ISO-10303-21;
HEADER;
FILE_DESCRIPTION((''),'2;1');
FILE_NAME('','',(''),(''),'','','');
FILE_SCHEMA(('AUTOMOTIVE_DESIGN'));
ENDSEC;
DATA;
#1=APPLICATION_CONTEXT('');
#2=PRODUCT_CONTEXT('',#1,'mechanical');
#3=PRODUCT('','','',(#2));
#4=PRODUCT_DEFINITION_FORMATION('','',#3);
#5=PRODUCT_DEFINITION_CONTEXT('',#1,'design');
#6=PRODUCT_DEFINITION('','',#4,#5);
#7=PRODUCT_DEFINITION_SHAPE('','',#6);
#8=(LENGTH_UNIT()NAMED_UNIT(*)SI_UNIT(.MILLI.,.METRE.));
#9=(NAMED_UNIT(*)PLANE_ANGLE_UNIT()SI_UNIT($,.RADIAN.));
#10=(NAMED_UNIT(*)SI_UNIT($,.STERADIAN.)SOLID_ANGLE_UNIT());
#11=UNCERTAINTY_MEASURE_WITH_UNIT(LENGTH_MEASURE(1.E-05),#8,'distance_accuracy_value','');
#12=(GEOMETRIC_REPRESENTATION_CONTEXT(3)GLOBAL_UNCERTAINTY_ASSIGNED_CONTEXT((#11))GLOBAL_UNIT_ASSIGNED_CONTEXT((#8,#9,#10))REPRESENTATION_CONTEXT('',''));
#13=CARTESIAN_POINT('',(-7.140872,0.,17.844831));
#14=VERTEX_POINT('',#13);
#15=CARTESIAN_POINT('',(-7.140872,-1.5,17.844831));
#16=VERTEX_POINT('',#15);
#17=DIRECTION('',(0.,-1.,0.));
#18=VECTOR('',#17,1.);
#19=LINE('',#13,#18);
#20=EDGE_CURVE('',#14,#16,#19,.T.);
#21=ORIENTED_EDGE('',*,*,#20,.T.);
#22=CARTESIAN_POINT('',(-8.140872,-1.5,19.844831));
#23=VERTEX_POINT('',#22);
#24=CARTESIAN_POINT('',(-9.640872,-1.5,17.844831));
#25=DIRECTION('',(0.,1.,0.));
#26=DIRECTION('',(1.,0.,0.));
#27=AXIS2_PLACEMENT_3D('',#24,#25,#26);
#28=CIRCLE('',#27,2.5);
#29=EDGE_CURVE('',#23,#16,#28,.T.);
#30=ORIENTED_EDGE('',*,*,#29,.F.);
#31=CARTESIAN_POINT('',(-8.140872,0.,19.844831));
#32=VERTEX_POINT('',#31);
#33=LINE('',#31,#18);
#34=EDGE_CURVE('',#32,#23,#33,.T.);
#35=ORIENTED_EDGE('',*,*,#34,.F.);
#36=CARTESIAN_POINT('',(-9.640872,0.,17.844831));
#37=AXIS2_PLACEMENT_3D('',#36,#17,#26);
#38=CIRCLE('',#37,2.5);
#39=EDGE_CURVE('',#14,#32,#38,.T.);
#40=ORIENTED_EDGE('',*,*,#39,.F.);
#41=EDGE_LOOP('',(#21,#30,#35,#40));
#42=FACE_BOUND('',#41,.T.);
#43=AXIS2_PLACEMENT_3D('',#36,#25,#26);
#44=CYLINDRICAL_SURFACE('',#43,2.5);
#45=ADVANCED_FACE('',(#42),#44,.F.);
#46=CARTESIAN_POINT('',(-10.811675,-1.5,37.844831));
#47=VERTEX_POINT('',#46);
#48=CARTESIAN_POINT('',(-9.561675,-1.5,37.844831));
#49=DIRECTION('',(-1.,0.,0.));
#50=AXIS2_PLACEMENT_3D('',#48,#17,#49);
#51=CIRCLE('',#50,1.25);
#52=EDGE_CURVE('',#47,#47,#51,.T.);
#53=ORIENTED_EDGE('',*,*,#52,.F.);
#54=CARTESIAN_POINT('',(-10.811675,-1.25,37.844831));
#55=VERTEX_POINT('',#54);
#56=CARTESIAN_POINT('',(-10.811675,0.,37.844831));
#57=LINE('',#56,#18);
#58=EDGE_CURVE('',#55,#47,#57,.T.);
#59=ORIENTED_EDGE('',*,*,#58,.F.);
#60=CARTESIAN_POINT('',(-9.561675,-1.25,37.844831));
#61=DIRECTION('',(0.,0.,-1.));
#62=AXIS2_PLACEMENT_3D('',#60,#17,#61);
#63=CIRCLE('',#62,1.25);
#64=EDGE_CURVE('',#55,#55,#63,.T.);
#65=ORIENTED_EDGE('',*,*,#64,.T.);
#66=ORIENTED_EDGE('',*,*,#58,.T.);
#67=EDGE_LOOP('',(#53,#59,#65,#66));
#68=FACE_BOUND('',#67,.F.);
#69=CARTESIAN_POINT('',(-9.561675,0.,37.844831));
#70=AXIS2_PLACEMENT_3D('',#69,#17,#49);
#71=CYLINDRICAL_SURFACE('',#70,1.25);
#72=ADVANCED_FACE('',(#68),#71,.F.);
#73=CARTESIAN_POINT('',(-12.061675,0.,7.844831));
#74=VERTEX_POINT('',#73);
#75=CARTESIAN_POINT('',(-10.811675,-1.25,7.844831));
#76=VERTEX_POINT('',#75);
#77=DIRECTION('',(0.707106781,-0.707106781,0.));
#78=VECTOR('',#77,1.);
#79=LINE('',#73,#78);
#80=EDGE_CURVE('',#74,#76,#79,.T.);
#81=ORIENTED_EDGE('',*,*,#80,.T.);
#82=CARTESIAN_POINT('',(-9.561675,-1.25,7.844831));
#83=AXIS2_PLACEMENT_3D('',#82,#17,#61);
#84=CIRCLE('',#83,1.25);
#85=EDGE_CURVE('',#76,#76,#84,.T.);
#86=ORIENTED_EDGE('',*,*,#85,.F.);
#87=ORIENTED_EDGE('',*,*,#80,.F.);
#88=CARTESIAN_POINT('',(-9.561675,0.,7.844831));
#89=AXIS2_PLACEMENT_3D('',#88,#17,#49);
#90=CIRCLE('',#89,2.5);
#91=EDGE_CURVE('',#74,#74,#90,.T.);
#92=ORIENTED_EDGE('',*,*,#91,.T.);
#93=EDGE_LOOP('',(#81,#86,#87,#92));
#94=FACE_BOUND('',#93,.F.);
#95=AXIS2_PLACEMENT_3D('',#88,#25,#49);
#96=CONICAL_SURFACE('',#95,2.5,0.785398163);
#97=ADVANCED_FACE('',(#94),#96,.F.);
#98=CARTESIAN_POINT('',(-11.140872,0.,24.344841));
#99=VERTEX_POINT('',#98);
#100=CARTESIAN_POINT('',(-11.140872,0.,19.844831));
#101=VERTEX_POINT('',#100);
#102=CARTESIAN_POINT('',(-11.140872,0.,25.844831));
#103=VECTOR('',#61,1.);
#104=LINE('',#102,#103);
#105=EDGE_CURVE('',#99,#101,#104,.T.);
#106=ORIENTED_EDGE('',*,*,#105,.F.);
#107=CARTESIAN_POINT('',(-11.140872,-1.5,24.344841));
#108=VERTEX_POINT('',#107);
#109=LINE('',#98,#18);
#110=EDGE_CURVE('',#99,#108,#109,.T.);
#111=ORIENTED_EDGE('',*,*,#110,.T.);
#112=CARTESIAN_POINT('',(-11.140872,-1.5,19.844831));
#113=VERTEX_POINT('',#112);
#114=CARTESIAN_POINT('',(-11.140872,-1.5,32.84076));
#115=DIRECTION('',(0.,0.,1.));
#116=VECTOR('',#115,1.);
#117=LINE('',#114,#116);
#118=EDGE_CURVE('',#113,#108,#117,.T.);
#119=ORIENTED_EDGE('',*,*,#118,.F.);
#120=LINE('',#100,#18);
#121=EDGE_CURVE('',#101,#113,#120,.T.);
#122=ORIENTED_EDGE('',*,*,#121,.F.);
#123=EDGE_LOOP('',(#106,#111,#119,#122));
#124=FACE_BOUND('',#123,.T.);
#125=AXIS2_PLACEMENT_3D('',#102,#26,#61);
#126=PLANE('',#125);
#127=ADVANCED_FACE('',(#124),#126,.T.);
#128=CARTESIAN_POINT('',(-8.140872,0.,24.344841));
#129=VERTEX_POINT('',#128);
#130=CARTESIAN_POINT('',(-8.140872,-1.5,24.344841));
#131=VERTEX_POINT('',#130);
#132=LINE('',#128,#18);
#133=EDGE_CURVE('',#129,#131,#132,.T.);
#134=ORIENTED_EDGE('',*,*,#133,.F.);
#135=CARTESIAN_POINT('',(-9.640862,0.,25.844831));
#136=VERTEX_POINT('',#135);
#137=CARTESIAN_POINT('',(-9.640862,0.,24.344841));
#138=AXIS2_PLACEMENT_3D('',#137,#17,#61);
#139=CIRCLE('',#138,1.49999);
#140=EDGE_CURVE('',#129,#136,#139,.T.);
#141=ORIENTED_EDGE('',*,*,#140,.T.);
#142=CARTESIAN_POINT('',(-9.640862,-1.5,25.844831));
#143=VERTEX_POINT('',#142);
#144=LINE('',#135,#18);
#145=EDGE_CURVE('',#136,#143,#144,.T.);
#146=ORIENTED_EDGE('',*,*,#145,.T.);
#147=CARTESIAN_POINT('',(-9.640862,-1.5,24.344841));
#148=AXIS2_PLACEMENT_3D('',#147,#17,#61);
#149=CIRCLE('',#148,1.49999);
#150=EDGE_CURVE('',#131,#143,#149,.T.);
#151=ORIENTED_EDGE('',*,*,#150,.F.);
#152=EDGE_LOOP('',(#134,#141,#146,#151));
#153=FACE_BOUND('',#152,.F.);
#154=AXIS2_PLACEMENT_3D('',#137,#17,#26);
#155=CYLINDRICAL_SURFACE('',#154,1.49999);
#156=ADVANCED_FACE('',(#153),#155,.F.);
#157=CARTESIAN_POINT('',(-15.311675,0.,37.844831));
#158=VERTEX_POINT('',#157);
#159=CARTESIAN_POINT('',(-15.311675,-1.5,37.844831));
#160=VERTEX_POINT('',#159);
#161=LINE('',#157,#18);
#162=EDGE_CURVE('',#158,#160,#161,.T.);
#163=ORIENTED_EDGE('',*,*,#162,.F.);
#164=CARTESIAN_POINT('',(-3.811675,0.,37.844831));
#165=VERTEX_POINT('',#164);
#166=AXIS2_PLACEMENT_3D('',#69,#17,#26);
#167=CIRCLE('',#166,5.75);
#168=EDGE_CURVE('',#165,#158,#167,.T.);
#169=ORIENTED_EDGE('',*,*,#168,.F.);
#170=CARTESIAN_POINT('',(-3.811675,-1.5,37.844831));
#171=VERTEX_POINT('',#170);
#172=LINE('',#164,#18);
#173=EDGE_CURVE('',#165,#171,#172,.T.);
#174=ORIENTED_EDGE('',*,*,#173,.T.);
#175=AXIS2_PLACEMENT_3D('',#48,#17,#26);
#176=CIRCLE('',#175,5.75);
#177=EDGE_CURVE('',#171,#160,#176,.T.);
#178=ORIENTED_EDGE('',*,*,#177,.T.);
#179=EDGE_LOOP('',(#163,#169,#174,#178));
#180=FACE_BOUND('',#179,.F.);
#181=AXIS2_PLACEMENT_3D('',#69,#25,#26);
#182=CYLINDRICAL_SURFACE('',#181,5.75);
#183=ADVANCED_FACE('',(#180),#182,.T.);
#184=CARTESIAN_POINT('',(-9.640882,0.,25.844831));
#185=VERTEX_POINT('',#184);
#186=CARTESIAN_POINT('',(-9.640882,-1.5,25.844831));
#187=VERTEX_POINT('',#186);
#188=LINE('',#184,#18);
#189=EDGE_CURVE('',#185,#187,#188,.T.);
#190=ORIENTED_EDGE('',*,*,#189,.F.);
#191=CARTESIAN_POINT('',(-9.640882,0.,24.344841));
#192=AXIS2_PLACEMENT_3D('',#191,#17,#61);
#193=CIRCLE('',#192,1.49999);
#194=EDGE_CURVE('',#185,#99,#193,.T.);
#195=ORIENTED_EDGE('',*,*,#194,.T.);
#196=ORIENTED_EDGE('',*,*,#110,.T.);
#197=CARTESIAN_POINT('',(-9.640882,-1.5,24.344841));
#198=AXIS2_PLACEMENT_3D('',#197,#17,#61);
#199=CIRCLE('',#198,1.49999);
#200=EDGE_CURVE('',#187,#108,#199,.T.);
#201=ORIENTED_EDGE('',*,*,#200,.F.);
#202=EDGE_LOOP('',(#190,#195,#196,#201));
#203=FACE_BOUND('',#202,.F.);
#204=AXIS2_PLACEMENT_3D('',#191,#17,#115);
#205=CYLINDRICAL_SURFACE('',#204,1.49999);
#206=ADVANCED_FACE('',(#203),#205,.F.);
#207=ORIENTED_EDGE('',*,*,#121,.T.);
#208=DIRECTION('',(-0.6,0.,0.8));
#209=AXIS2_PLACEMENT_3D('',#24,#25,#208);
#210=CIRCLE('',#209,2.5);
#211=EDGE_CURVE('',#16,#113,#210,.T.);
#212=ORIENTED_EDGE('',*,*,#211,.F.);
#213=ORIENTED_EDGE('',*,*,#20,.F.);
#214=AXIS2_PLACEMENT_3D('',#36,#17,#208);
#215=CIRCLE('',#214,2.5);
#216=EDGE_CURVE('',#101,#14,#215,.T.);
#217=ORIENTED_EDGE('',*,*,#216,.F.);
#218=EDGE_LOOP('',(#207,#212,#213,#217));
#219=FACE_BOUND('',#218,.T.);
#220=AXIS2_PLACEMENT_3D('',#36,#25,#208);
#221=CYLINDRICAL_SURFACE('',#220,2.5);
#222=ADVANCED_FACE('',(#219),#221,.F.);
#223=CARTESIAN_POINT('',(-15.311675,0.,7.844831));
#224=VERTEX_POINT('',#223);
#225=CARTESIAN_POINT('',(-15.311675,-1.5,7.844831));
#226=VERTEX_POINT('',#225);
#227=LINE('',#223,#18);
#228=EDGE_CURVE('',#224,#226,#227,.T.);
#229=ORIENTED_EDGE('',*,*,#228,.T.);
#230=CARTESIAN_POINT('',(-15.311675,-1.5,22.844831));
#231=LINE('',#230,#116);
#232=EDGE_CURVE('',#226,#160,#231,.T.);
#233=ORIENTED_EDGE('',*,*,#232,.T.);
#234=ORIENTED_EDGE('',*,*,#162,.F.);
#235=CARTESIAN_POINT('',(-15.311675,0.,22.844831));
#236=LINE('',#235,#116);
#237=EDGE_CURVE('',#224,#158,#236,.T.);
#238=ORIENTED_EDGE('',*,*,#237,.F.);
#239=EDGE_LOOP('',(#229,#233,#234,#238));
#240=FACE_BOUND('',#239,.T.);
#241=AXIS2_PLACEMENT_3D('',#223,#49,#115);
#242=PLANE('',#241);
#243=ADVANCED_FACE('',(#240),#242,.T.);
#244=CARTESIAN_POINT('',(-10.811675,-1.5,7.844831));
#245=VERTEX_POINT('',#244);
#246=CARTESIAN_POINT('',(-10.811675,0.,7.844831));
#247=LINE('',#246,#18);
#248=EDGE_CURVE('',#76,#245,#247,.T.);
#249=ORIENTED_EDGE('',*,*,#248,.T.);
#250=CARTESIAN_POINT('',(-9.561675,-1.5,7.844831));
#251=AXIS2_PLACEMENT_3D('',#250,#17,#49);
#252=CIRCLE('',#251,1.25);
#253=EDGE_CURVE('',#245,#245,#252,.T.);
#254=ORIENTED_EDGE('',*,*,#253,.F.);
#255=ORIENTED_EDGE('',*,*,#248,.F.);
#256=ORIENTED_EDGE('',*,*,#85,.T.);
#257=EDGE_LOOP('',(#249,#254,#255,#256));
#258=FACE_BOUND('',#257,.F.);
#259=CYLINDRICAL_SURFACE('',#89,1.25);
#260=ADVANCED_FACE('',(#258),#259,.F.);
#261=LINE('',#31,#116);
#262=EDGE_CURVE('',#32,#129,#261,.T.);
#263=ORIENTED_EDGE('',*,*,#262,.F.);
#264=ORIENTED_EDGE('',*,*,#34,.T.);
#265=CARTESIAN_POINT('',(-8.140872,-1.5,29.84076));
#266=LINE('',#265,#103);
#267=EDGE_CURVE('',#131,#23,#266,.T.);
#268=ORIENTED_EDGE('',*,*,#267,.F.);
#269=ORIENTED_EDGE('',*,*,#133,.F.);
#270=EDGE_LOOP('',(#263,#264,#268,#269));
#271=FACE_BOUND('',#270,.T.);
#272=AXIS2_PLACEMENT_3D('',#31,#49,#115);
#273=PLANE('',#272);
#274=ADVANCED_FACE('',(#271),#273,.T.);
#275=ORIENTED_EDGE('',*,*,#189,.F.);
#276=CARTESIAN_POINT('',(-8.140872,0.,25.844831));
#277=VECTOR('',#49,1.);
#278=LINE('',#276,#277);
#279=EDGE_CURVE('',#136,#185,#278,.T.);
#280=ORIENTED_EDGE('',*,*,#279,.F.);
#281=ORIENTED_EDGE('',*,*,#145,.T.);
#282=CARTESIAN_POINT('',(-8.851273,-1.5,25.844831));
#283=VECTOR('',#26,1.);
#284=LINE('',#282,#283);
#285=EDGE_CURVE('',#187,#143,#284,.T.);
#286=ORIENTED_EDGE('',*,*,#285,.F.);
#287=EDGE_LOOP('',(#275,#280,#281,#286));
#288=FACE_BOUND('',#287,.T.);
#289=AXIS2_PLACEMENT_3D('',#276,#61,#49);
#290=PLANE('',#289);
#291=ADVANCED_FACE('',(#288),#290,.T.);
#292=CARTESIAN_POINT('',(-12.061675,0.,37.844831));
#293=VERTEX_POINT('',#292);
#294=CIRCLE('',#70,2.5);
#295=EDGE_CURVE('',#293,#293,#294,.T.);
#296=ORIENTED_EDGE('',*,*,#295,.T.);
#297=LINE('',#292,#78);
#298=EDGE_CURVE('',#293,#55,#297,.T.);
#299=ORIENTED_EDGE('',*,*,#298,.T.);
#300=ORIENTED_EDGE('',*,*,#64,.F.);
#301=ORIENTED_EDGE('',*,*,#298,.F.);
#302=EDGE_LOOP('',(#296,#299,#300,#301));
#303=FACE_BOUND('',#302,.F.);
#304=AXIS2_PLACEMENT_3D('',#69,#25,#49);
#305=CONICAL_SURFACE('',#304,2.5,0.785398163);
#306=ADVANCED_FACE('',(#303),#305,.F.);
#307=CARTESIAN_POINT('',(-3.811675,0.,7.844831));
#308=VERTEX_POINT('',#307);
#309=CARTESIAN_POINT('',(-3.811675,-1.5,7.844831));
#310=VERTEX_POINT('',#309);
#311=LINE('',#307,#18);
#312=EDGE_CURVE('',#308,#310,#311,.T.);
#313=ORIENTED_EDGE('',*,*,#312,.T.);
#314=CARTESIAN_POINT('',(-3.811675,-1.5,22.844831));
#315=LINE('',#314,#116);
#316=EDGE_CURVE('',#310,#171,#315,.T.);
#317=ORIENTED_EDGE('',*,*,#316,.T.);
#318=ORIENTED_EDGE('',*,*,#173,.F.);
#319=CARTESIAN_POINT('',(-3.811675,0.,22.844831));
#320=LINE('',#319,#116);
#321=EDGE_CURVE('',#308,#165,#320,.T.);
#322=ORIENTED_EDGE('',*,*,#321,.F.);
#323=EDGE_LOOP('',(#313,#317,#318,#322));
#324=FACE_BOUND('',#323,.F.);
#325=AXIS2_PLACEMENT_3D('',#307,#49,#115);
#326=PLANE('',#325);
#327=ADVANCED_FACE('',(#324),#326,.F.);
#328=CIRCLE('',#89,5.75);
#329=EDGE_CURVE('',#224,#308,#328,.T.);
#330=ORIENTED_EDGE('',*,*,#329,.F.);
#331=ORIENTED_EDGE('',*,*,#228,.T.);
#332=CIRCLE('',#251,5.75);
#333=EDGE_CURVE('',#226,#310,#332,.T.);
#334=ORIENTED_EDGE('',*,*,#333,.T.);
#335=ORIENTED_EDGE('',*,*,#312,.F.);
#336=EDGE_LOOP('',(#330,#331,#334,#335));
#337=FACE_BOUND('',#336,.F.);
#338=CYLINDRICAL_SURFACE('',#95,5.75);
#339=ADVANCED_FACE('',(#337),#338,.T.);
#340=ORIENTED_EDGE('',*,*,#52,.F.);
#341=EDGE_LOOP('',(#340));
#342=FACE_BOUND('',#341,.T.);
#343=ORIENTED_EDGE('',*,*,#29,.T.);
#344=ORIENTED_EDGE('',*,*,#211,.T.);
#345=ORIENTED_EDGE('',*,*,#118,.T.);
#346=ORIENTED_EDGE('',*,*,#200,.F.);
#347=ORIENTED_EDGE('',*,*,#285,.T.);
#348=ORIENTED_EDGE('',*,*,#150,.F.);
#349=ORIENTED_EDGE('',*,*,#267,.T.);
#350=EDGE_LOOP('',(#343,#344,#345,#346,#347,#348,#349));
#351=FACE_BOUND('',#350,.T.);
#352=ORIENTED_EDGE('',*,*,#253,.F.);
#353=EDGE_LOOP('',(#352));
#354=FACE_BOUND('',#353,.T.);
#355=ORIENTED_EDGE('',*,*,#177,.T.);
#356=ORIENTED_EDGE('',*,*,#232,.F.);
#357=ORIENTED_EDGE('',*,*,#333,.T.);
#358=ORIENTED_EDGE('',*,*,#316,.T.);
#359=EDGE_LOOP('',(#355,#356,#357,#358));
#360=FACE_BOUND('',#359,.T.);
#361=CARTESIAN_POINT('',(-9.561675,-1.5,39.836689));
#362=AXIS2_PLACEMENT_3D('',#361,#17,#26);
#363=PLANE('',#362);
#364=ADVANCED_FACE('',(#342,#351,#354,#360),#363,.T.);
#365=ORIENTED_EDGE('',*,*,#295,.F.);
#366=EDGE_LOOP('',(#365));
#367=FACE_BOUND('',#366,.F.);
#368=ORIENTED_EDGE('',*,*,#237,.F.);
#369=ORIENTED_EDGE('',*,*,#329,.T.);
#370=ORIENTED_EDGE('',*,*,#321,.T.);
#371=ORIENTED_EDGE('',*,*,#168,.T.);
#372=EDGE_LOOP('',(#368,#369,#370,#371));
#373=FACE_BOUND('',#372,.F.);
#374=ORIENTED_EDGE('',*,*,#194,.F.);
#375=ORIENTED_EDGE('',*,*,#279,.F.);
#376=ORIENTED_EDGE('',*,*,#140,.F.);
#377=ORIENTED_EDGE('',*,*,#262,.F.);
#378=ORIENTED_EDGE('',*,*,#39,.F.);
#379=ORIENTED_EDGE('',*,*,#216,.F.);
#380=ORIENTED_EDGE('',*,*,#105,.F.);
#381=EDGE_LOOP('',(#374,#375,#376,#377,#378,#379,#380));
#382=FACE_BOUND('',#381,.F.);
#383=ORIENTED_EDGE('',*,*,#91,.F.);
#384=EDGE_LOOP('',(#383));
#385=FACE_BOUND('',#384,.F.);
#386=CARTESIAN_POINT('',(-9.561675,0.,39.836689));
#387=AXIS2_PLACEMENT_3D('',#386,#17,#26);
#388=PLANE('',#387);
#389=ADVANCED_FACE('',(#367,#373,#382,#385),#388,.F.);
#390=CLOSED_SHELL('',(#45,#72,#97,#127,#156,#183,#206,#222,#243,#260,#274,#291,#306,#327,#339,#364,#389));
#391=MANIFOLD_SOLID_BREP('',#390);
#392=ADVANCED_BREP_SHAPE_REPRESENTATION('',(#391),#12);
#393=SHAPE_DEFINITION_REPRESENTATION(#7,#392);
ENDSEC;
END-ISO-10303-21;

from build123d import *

# Parameters (mm, degrees)
F0_W           = 11.5
F0_H           = 30
F1_DEPTH       = 1.5
F2_D           = 2.5
F2_CSINK_D     = 5
F2_CSINK_ANGLE = 90
F4_DEPTH       = 25
F5_R           = 1.49999


# Not quite as in the source:
# - a fillet or chamfer is up to 0.001 mm smaller than in the source, because OpenCascade refuses the exact size


with BuildPart() as f1:
    # F0 (on Front) → F1 (new body)
    with BuildSketch(Plane.XZ):
        with BuildLine():
            ThreePointArc((-3.8116748205, 37.8448306397), (-9.5616748205, 43.5948306397), (-15.3116748205, 37.8448306397))
            Line((-15.3116748205, 37.8448306397), (-3.8116748205, 37.8448306397))
        make_face()
        with Locations((-9.5616748205, 22.8448306397)):
            Rectangle(F0_W, F0_H)
        with BuildLine():
            Line((-3.8116748205, 7.8448306397), (-15.3116748205, 7.8448306397))
            ThreePointArc((-15.3116748205, 7.8448306397), (-9.5616748205, 2.0948306397), (-3.8116748205, 7.8448306397))
        make_face()
    extrude(amount=F1_DEPTH)

    # F2 (through all)
    with Locations(Plane(origin=(0, 0, 0), x_dir=(1, 0, 0), z_dir=(0, 1, 0))):
        with Locations((-9.5616748205, -37.8448306397), (-9.5616748205, -7.8448306397)):
            CounterSinkHole(F2_D / 2, F2_CSINK_D / 2, counter_sink_angle=F2_CSINK_ANGLE)

    # F3 (on face) → F4 (cut)
    with BuildSketch(Plane.XZ):
        with BuildLine():
            Line((-8.1408721001, 19.8448306397), (-8.1408721001, 25.8448306397))
            Line((-8.1408721001, 25.8448306397), (-11.1408721001, 25.8448306397))
            Line((-11.1408721001, 25.8448306397), (-11.1408721001, 19.8448306397))
            ThreePointArc((-11.1408721001, 19.8448306397), (-9.6408721001, 20.3448306397), (-8.1408721001, 19.8448306397))
        make_face()
        with BuildLine():
            ThreePointArc((-7.1408721001, 17.8448306397), (-7.4048041226, 18.9628646284), (-8.1408721001, 19.8448306397))
            Line((-8.1408721001, 19.8448306397), (-8.1408721001, 17.8448306397))
            Line((-8.1408721001, 17.8448306397), (-11.1408721001, 17.8448306397))
            Line((-11.1408721001, 17.8448306397), (-11.1408721001, 19.8448306397))
            ThreePointArc((-11.1408721001, 19.8448306397), (-10.7589060888, 15.6087626622), (-7.1408721001, 17.8448306397))
        make_face()
        with BuildLine():
            Line((-8.1408721001, 17.8448306397), (-8.1408721001, 19.8448306397))
            ThreePointArc((-8.1408721001, 19.8448306397), (-9.6408721001, 20.3448306397), (-11.1408721001, 19.8448306397))
            Line((-11.1408721001, 19.8448306397), (-11.1408721001, 17.8448306397))
            Line((-11.1408721001, 17.8448306397), (-8.1408721001, 17.8448306397))
        make_face()
    extrude(amount=F4_DEPTH, mode=Mode.SUBTRACT)

    # F5 (radius 1.5 in the source; OpenCascade refuses exactly that, so slightly less here)
    f5_edges = [f1.edges().sort_by_distance(p)[0] for p in [
        (-8.140872, -0.75, 25.844831),
        (-11.140872, -0.75, 25.844831),
    ]]
    fillet(f5_edges, radius=F5_R)


solid = f1.part
